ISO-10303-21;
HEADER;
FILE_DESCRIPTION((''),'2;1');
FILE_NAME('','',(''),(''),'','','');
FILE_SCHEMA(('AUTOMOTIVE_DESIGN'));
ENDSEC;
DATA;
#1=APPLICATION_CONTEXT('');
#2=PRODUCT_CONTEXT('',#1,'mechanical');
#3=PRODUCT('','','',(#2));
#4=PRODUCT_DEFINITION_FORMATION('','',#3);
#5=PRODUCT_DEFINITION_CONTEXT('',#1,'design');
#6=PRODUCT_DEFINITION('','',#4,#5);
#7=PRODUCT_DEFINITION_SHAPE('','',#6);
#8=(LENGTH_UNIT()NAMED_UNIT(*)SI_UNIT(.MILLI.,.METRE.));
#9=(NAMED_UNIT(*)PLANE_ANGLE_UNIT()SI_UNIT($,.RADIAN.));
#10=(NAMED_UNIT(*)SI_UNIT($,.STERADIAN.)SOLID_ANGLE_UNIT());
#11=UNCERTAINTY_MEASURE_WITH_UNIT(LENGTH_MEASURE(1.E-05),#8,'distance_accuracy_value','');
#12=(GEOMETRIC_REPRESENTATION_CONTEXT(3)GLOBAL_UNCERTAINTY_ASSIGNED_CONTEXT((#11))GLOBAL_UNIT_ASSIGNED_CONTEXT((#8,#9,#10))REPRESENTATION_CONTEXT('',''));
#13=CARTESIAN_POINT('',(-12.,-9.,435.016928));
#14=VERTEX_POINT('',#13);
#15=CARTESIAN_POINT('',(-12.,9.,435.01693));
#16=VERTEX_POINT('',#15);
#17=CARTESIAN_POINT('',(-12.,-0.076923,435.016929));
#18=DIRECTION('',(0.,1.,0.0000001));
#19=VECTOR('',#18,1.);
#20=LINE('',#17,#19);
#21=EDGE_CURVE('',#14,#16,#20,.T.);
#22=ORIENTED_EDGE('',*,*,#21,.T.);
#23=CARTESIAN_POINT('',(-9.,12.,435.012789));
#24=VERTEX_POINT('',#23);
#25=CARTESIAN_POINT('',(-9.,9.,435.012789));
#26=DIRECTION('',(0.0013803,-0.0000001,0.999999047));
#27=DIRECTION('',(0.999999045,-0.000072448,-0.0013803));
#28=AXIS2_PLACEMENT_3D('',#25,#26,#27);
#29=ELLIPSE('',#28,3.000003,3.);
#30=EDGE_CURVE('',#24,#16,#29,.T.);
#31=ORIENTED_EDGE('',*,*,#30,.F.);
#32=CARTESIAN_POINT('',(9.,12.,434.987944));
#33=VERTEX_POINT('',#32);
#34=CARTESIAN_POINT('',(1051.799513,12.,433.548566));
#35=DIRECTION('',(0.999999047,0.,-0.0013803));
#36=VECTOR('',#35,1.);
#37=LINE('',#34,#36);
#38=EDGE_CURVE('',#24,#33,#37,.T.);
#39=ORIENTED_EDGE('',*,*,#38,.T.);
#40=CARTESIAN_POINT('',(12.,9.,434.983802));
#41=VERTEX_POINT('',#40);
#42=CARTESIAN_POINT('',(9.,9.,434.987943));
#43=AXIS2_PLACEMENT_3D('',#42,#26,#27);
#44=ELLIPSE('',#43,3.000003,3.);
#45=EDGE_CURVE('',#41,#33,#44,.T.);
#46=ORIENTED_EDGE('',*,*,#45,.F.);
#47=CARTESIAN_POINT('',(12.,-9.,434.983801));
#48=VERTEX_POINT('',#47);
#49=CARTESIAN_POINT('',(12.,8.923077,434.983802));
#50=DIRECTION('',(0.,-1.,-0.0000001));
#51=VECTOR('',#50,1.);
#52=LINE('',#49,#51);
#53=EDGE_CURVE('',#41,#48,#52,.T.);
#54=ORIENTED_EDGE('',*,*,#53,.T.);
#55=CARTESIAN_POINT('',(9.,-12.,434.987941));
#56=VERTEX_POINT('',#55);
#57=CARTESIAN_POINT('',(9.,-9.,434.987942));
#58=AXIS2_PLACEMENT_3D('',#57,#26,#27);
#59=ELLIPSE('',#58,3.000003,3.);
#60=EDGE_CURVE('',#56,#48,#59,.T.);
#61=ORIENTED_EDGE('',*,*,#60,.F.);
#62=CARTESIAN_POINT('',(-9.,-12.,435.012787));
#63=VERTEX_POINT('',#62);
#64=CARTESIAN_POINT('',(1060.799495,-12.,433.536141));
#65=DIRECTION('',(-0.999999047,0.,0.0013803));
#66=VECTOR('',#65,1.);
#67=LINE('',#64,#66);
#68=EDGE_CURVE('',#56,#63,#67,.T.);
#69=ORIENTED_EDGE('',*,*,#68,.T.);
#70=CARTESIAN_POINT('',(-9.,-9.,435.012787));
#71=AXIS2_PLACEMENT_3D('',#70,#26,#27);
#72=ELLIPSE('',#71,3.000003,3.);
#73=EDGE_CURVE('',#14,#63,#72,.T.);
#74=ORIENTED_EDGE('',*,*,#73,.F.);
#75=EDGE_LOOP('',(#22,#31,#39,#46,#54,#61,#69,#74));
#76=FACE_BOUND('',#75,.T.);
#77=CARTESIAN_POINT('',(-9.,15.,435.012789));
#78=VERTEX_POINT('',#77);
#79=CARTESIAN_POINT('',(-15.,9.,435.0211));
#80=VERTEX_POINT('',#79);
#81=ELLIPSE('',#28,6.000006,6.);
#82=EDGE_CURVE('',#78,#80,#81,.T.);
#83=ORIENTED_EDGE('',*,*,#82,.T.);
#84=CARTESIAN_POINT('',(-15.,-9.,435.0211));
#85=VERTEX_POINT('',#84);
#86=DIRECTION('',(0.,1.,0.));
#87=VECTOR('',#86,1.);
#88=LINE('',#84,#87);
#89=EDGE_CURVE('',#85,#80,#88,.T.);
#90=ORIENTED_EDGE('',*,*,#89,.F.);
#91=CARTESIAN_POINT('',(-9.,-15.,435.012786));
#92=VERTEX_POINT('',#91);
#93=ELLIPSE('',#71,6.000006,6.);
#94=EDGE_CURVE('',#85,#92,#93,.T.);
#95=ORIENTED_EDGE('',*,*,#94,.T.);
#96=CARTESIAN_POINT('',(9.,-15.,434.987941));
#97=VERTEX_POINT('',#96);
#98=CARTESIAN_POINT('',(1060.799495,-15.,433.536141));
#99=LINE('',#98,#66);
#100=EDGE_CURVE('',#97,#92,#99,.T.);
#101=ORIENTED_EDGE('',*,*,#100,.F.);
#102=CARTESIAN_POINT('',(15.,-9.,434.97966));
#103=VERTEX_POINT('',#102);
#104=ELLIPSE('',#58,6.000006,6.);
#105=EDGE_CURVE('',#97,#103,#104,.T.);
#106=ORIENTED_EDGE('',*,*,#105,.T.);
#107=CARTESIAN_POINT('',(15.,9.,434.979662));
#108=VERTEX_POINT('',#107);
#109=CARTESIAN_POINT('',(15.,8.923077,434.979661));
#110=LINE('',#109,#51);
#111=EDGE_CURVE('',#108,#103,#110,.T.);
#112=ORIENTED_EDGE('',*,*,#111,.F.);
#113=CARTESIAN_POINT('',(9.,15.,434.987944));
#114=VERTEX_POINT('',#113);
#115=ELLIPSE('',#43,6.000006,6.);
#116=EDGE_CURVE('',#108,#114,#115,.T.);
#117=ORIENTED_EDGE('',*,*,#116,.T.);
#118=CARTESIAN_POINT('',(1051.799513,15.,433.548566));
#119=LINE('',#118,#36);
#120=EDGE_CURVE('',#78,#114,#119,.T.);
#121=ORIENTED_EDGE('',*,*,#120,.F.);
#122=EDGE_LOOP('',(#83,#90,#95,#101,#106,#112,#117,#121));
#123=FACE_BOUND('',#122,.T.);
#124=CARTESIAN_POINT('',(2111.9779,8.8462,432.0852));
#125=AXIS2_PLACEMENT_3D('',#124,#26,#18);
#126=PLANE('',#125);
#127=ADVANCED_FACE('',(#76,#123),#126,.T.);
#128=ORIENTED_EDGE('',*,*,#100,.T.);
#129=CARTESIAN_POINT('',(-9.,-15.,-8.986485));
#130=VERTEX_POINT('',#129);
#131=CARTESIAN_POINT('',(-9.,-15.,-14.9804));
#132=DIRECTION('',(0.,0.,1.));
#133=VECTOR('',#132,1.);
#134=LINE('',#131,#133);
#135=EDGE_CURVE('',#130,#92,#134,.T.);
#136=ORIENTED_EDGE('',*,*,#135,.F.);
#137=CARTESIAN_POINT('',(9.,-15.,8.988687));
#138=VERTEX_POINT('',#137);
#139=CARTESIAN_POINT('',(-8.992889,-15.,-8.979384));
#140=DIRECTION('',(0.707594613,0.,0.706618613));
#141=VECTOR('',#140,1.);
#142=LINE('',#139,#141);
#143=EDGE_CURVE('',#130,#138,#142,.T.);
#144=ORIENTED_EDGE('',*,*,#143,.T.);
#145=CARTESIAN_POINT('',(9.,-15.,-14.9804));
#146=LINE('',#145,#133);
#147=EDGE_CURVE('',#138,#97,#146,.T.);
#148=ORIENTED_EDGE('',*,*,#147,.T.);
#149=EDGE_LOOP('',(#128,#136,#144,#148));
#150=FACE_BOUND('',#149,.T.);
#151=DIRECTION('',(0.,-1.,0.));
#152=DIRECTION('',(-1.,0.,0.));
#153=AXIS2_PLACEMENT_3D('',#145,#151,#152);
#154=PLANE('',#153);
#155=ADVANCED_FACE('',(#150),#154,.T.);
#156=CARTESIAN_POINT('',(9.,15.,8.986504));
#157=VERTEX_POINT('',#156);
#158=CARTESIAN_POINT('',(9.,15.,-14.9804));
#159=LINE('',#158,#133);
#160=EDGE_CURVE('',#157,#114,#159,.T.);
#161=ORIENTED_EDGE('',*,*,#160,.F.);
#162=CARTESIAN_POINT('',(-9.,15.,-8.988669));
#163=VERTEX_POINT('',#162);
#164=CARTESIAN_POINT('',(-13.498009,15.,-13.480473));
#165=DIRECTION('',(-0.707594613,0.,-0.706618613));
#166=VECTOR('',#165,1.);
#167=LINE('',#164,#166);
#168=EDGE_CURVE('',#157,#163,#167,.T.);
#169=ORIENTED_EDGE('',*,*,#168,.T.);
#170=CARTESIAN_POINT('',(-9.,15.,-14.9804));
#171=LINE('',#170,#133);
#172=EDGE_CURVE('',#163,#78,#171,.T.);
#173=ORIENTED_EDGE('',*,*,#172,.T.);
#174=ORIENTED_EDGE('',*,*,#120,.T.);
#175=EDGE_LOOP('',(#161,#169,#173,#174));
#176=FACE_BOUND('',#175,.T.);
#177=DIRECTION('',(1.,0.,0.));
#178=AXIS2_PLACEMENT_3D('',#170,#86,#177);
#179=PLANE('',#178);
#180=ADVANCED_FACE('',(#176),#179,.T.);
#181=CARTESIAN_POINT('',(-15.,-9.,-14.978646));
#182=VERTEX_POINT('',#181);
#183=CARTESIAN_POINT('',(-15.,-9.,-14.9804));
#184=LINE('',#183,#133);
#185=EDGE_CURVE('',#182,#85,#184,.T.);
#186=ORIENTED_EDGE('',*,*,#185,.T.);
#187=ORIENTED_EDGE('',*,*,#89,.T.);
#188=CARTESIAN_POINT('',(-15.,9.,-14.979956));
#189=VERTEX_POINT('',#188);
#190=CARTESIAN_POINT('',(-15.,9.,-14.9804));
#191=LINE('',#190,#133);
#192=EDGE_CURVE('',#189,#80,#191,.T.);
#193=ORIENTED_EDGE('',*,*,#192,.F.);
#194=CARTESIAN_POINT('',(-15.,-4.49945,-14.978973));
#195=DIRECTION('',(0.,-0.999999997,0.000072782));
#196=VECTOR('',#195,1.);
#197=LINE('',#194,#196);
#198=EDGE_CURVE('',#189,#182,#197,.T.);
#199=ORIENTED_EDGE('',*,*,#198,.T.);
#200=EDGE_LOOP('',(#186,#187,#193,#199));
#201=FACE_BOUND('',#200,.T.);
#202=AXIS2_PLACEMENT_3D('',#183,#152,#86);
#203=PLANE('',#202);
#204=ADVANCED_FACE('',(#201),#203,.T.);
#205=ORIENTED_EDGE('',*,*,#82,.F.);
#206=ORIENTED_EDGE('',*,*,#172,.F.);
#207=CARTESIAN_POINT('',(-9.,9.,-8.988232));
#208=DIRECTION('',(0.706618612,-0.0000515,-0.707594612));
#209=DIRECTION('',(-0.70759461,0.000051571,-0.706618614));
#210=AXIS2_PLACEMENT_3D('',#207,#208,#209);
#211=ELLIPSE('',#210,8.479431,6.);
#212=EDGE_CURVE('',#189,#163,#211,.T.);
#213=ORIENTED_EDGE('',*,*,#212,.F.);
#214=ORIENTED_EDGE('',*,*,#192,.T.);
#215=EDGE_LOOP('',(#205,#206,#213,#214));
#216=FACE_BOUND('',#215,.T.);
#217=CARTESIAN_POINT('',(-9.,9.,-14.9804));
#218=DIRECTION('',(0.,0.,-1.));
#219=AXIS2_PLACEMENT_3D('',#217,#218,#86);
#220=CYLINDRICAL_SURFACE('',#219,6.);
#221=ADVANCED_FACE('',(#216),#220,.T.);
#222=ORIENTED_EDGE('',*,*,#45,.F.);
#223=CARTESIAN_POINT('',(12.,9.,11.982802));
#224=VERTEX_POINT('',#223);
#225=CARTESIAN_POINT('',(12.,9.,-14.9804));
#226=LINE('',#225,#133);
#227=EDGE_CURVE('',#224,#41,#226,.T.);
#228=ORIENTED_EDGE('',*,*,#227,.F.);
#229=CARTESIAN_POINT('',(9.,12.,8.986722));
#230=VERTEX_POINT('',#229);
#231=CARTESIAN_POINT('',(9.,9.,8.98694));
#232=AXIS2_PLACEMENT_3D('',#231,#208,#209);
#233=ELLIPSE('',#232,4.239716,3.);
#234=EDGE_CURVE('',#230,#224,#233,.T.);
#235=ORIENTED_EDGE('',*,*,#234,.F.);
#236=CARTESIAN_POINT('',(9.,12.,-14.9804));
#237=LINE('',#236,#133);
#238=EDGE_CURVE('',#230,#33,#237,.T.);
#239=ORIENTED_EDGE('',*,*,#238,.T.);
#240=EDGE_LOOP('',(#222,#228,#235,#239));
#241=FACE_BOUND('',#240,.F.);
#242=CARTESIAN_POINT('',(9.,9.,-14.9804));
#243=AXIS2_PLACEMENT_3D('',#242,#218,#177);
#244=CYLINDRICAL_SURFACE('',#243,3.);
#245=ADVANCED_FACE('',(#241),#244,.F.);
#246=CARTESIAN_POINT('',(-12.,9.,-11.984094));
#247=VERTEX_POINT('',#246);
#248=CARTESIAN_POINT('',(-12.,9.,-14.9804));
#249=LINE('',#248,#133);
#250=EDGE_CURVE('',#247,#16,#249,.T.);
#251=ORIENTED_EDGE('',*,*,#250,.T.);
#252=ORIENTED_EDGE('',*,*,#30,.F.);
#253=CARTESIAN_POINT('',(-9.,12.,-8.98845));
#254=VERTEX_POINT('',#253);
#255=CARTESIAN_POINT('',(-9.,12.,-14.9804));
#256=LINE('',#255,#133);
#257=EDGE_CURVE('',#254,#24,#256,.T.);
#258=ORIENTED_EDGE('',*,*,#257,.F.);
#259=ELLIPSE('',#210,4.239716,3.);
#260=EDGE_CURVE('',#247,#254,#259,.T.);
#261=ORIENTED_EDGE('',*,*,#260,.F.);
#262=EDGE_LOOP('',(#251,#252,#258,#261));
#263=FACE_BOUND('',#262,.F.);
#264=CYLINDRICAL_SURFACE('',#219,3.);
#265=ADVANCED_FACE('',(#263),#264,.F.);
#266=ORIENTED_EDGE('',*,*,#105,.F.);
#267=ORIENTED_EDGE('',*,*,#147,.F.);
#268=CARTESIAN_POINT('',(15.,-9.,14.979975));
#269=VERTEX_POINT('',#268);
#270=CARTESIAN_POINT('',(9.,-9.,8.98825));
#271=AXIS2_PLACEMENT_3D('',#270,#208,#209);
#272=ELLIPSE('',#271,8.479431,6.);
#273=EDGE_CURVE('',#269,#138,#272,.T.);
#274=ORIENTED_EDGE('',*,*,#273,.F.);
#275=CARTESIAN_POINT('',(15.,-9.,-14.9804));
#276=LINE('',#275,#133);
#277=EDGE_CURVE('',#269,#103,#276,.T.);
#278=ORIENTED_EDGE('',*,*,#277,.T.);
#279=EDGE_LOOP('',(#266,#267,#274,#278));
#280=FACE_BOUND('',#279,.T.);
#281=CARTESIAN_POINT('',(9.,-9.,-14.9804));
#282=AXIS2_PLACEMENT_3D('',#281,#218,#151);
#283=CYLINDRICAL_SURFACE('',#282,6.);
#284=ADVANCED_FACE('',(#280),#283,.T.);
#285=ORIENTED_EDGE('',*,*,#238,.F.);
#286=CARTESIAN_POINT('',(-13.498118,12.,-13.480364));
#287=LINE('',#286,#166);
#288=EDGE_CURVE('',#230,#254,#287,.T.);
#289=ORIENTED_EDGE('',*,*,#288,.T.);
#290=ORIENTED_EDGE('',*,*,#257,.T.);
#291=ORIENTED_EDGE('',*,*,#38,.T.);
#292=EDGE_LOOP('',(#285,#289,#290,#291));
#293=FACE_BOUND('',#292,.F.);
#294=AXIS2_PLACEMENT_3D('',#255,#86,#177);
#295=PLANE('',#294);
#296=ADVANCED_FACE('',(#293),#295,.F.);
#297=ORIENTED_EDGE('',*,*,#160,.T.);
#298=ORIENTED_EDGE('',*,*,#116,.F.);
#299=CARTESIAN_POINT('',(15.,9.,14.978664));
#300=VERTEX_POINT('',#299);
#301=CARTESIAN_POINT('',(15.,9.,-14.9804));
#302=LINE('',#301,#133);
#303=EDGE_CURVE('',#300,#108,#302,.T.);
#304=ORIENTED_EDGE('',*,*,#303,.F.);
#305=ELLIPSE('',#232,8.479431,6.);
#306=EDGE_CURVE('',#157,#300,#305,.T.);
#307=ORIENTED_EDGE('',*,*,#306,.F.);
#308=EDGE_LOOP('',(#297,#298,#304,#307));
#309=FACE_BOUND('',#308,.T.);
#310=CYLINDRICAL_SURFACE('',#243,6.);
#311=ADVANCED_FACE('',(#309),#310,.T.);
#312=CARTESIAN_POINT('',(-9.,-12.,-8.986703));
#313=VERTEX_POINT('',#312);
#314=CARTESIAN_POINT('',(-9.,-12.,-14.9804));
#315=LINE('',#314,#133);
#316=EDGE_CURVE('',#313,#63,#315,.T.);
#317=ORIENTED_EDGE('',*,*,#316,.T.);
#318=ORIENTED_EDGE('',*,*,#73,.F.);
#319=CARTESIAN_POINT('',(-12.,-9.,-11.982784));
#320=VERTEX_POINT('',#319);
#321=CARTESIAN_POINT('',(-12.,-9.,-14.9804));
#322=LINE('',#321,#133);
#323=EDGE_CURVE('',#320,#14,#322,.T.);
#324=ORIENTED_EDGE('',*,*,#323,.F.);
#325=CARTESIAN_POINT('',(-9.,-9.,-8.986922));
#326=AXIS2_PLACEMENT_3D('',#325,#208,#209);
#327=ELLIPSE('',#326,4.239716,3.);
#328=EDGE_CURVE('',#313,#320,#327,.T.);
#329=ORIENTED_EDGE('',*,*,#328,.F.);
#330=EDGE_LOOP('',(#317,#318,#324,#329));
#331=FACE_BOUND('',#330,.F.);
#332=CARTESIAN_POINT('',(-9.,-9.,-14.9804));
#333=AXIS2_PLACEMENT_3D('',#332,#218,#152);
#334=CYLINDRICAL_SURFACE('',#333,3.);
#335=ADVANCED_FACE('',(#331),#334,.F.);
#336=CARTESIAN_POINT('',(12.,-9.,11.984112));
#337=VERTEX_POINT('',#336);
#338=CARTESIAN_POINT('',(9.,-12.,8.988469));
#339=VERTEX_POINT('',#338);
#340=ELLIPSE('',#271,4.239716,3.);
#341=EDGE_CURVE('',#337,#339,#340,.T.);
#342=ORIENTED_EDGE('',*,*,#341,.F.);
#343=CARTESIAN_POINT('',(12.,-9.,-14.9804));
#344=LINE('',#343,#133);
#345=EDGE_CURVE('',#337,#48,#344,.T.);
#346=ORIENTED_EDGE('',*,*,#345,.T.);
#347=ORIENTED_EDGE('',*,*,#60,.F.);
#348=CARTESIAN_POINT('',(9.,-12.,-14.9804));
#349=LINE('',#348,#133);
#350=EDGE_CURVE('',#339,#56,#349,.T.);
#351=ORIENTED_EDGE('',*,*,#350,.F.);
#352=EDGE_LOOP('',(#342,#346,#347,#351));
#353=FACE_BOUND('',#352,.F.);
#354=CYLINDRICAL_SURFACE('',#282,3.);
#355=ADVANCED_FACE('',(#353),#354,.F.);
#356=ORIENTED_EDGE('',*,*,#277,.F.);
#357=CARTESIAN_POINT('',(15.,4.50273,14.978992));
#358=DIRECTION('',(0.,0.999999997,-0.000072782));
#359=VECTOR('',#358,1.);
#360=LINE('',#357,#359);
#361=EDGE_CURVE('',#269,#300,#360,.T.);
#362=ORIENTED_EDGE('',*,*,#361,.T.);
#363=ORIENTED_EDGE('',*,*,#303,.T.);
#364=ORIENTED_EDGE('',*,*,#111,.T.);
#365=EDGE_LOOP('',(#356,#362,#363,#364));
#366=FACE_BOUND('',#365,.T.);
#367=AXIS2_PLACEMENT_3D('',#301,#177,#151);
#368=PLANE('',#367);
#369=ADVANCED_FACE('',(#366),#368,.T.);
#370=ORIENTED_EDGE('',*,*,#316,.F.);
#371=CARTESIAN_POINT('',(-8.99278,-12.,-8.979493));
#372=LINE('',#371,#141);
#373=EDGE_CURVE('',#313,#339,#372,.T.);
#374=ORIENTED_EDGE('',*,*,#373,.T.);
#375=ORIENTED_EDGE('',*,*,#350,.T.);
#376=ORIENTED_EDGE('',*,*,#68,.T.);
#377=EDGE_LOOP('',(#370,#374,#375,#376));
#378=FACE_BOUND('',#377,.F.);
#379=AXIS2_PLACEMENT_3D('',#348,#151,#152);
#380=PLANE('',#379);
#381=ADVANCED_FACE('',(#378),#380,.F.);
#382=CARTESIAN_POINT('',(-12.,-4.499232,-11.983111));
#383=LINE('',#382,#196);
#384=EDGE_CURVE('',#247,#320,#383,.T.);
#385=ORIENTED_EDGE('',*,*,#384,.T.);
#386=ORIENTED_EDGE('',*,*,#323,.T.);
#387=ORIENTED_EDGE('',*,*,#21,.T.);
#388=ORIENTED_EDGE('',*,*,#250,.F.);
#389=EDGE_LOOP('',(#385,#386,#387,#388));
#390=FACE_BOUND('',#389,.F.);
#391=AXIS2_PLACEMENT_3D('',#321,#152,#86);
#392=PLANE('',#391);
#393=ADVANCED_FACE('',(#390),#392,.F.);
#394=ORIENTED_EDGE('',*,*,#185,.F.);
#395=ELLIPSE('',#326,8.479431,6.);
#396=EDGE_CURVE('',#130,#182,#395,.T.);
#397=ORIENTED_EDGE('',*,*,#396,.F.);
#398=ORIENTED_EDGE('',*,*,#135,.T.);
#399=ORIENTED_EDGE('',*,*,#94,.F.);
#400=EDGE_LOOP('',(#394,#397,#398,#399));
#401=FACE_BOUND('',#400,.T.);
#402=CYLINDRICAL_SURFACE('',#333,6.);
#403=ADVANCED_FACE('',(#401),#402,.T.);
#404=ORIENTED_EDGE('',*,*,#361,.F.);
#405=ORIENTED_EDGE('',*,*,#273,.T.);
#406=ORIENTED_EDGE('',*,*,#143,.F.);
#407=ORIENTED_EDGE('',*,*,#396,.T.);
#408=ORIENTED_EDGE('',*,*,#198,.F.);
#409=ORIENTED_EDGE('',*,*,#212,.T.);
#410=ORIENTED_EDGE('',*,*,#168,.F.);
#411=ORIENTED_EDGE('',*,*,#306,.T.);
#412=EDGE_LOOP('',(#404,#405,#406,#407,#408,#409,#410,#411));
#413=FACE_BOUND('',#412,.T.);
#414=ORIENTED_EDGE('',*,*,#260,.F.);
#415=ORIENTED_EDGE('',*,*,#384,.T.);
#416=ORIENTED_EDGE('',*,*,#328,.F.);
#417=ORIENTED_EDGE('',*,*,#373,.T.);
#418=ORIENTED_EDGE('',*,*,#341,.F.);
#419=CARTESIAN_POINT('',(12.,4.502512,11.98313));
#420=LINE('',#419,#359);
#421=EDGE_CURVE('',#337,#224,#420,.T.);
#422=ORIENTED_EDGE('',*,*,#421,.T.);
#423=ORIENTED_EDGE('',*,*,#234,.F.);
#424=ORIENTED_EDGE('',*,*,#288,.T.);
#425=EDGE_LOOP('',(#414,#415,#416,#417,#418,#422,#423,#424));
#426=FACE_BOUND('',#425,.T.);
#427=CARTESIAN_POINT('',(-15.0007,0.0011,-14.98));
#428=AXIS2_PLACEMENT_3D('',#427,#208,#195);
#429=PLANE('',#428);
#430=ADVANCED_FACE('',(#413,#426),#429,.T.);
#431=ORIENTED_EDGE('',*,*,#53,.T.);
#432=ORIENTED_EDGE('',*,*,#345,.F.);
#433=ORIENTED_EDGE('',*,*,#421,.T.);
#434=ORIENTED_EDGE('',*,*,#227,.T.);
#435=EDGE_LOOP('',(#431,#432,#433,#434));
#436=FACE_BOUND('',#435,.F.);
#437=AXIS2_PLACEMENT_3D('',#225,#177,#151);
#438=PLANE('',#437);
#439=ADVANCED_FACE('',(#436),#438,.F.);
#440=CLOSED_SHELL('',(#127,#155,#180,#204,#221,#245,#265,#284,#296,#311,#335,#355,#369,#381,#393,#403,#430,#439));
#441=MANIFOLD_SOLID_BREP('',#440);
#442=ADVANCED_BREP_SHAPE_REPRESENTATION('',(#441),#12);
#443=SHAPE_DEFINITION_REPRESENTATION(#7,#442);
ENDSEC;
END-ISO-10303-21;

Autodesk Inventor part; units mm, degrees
ref_plane "Start Plane" through (0, 0, -14.9804) normal (0, 0, 1) x (1, 0, 0)
ref_plane "End Plane" through (0, 0, 435.0211) normal (0, 0, 1) x (1, 0, 0)
sketch "Sketch" plane through (0, 0, 0) normal (0, 0, 1) x (1, 0, 0)
  line L0 (-15, -9) -> (-15, 9)
  line L1 (-9, 15) -> (9, 15)
  line L2 (15, 9) -> (15, -9)
  line L3 (9, -15) -> (-9, -15)
  arc A0 (-15, -9) -> (-9, -15) centre (-9, -9) ccw
  arc A1 (-9, 15) -> (-15, 9) centre (-9, 9) ccw
  arc A2 (15, 9) -> (9, 15) centre (9, 9) ccw
  arc A3 (9, -15) -> (15, -9) centre (9, -9) ccw
  arc A4 (-9, 12) -> (-12, 9) centre (-9, 9) ccw
  line L4 (-9, 12) -> (9, 12)
  arc A5 (12, 9) -> (9, 12) centre (9, 9) ccw
  line L5 (12, 9) -> (12, -9)
  arc A6 (9, -12) -> (12, -9) centre (9, -9) ccw
  line L6 (9, -12) -> (-9, -12)
  arc A7 (-12, -9) -> (-9, -12) centre (-9, -9) ccw
  line L7 (-12, -9) -> (-12, 9)
  line L8 (0, 22.7397) -> (0, -22.7397) construction
  line L9 (-22.7397, 0) -> (22.7397, 0) construction
  dimension "d7" = 6
  dimension "d10" = 30
  dimension "d11" = 30
  dimension "d12" = 3
  dimension "d15" = 15
  dimension "d16" = 15
extrude "Body" add sketch "Sketch" along normal up to surface (450.0015 mm away) from surface at -14.9804
sketch "Sketch3" plane through (0, 0, 0) normal (0, 0, 1) x (1, 0, 0)
  line L0 (0, 0) -> (10, 0)
ref_plane "Work Plane3" through (0, 0, 0) normal (0, -1, 0) x (1, 0, 0)
ref_plane "Work Plane4" through (-15.0007, 0.0011, -14.98) normal (0.7066186, -0.0000515, -0.7075946) x (-0.7075946, 0.0001243, -0.7066186)
split "Split1" plane through (-15.0007, 0.0011, -14.98) removes the side toward (0.7066186, -0.0000515, -0.7075946)
ref_plane "Work Plane5" through (2111.9779, 8.8462, 432.0852) normal (0.0013803, -0.0000001, 0.999999) x (0.999999, 0, -0.0013803)
split "Split2" plane through (2111.9779, 8.8462, 432.0852) removes the side toward (0.0013803, -0.0000001, 0.999999)
sketch "Sketch4" plane through (0, 0, 0) normal (0, -1, 0) x (1, 0, 0)
  line L0 (-2, -14.9804) -> (12, -14.9804) projected
  line L1 (-2, 435.0211) -> (12, 435.0211) projected
  dimension "d18" = 450.0015
equation "\"d7\" = G_IR"
equation "\"d10\" = G_H"
equation "\"d11\" = G_W"
equation "\"d12\" = G_T"
equation "\"d15\" = 0.5 * d10"
equation "\"d16\" = 0.5 * d11"
equation "\"d3\" = G_L"
equation "\"G_W\" = 30"
equation "\"G_H\" = 30"
equation "\"G_T\" = 3"
equation "\"G_IR\" = 6"
equation "\"G_L\" = d18"
equation "\"G_OFFSET_START\" = 14.9804"
equation "\"G_OFFSET_END\" = -14.97931"
equation "\"d13\" = -G_OFFSET_START"
equation "\"d14\" = G_OFFSET_END + B_L"
equation "\"B_L\" = 450.00043"
properties part number "DIN EN 10219-2 - 30 x 30 x 3  - 450" material "Steel, Mild"
